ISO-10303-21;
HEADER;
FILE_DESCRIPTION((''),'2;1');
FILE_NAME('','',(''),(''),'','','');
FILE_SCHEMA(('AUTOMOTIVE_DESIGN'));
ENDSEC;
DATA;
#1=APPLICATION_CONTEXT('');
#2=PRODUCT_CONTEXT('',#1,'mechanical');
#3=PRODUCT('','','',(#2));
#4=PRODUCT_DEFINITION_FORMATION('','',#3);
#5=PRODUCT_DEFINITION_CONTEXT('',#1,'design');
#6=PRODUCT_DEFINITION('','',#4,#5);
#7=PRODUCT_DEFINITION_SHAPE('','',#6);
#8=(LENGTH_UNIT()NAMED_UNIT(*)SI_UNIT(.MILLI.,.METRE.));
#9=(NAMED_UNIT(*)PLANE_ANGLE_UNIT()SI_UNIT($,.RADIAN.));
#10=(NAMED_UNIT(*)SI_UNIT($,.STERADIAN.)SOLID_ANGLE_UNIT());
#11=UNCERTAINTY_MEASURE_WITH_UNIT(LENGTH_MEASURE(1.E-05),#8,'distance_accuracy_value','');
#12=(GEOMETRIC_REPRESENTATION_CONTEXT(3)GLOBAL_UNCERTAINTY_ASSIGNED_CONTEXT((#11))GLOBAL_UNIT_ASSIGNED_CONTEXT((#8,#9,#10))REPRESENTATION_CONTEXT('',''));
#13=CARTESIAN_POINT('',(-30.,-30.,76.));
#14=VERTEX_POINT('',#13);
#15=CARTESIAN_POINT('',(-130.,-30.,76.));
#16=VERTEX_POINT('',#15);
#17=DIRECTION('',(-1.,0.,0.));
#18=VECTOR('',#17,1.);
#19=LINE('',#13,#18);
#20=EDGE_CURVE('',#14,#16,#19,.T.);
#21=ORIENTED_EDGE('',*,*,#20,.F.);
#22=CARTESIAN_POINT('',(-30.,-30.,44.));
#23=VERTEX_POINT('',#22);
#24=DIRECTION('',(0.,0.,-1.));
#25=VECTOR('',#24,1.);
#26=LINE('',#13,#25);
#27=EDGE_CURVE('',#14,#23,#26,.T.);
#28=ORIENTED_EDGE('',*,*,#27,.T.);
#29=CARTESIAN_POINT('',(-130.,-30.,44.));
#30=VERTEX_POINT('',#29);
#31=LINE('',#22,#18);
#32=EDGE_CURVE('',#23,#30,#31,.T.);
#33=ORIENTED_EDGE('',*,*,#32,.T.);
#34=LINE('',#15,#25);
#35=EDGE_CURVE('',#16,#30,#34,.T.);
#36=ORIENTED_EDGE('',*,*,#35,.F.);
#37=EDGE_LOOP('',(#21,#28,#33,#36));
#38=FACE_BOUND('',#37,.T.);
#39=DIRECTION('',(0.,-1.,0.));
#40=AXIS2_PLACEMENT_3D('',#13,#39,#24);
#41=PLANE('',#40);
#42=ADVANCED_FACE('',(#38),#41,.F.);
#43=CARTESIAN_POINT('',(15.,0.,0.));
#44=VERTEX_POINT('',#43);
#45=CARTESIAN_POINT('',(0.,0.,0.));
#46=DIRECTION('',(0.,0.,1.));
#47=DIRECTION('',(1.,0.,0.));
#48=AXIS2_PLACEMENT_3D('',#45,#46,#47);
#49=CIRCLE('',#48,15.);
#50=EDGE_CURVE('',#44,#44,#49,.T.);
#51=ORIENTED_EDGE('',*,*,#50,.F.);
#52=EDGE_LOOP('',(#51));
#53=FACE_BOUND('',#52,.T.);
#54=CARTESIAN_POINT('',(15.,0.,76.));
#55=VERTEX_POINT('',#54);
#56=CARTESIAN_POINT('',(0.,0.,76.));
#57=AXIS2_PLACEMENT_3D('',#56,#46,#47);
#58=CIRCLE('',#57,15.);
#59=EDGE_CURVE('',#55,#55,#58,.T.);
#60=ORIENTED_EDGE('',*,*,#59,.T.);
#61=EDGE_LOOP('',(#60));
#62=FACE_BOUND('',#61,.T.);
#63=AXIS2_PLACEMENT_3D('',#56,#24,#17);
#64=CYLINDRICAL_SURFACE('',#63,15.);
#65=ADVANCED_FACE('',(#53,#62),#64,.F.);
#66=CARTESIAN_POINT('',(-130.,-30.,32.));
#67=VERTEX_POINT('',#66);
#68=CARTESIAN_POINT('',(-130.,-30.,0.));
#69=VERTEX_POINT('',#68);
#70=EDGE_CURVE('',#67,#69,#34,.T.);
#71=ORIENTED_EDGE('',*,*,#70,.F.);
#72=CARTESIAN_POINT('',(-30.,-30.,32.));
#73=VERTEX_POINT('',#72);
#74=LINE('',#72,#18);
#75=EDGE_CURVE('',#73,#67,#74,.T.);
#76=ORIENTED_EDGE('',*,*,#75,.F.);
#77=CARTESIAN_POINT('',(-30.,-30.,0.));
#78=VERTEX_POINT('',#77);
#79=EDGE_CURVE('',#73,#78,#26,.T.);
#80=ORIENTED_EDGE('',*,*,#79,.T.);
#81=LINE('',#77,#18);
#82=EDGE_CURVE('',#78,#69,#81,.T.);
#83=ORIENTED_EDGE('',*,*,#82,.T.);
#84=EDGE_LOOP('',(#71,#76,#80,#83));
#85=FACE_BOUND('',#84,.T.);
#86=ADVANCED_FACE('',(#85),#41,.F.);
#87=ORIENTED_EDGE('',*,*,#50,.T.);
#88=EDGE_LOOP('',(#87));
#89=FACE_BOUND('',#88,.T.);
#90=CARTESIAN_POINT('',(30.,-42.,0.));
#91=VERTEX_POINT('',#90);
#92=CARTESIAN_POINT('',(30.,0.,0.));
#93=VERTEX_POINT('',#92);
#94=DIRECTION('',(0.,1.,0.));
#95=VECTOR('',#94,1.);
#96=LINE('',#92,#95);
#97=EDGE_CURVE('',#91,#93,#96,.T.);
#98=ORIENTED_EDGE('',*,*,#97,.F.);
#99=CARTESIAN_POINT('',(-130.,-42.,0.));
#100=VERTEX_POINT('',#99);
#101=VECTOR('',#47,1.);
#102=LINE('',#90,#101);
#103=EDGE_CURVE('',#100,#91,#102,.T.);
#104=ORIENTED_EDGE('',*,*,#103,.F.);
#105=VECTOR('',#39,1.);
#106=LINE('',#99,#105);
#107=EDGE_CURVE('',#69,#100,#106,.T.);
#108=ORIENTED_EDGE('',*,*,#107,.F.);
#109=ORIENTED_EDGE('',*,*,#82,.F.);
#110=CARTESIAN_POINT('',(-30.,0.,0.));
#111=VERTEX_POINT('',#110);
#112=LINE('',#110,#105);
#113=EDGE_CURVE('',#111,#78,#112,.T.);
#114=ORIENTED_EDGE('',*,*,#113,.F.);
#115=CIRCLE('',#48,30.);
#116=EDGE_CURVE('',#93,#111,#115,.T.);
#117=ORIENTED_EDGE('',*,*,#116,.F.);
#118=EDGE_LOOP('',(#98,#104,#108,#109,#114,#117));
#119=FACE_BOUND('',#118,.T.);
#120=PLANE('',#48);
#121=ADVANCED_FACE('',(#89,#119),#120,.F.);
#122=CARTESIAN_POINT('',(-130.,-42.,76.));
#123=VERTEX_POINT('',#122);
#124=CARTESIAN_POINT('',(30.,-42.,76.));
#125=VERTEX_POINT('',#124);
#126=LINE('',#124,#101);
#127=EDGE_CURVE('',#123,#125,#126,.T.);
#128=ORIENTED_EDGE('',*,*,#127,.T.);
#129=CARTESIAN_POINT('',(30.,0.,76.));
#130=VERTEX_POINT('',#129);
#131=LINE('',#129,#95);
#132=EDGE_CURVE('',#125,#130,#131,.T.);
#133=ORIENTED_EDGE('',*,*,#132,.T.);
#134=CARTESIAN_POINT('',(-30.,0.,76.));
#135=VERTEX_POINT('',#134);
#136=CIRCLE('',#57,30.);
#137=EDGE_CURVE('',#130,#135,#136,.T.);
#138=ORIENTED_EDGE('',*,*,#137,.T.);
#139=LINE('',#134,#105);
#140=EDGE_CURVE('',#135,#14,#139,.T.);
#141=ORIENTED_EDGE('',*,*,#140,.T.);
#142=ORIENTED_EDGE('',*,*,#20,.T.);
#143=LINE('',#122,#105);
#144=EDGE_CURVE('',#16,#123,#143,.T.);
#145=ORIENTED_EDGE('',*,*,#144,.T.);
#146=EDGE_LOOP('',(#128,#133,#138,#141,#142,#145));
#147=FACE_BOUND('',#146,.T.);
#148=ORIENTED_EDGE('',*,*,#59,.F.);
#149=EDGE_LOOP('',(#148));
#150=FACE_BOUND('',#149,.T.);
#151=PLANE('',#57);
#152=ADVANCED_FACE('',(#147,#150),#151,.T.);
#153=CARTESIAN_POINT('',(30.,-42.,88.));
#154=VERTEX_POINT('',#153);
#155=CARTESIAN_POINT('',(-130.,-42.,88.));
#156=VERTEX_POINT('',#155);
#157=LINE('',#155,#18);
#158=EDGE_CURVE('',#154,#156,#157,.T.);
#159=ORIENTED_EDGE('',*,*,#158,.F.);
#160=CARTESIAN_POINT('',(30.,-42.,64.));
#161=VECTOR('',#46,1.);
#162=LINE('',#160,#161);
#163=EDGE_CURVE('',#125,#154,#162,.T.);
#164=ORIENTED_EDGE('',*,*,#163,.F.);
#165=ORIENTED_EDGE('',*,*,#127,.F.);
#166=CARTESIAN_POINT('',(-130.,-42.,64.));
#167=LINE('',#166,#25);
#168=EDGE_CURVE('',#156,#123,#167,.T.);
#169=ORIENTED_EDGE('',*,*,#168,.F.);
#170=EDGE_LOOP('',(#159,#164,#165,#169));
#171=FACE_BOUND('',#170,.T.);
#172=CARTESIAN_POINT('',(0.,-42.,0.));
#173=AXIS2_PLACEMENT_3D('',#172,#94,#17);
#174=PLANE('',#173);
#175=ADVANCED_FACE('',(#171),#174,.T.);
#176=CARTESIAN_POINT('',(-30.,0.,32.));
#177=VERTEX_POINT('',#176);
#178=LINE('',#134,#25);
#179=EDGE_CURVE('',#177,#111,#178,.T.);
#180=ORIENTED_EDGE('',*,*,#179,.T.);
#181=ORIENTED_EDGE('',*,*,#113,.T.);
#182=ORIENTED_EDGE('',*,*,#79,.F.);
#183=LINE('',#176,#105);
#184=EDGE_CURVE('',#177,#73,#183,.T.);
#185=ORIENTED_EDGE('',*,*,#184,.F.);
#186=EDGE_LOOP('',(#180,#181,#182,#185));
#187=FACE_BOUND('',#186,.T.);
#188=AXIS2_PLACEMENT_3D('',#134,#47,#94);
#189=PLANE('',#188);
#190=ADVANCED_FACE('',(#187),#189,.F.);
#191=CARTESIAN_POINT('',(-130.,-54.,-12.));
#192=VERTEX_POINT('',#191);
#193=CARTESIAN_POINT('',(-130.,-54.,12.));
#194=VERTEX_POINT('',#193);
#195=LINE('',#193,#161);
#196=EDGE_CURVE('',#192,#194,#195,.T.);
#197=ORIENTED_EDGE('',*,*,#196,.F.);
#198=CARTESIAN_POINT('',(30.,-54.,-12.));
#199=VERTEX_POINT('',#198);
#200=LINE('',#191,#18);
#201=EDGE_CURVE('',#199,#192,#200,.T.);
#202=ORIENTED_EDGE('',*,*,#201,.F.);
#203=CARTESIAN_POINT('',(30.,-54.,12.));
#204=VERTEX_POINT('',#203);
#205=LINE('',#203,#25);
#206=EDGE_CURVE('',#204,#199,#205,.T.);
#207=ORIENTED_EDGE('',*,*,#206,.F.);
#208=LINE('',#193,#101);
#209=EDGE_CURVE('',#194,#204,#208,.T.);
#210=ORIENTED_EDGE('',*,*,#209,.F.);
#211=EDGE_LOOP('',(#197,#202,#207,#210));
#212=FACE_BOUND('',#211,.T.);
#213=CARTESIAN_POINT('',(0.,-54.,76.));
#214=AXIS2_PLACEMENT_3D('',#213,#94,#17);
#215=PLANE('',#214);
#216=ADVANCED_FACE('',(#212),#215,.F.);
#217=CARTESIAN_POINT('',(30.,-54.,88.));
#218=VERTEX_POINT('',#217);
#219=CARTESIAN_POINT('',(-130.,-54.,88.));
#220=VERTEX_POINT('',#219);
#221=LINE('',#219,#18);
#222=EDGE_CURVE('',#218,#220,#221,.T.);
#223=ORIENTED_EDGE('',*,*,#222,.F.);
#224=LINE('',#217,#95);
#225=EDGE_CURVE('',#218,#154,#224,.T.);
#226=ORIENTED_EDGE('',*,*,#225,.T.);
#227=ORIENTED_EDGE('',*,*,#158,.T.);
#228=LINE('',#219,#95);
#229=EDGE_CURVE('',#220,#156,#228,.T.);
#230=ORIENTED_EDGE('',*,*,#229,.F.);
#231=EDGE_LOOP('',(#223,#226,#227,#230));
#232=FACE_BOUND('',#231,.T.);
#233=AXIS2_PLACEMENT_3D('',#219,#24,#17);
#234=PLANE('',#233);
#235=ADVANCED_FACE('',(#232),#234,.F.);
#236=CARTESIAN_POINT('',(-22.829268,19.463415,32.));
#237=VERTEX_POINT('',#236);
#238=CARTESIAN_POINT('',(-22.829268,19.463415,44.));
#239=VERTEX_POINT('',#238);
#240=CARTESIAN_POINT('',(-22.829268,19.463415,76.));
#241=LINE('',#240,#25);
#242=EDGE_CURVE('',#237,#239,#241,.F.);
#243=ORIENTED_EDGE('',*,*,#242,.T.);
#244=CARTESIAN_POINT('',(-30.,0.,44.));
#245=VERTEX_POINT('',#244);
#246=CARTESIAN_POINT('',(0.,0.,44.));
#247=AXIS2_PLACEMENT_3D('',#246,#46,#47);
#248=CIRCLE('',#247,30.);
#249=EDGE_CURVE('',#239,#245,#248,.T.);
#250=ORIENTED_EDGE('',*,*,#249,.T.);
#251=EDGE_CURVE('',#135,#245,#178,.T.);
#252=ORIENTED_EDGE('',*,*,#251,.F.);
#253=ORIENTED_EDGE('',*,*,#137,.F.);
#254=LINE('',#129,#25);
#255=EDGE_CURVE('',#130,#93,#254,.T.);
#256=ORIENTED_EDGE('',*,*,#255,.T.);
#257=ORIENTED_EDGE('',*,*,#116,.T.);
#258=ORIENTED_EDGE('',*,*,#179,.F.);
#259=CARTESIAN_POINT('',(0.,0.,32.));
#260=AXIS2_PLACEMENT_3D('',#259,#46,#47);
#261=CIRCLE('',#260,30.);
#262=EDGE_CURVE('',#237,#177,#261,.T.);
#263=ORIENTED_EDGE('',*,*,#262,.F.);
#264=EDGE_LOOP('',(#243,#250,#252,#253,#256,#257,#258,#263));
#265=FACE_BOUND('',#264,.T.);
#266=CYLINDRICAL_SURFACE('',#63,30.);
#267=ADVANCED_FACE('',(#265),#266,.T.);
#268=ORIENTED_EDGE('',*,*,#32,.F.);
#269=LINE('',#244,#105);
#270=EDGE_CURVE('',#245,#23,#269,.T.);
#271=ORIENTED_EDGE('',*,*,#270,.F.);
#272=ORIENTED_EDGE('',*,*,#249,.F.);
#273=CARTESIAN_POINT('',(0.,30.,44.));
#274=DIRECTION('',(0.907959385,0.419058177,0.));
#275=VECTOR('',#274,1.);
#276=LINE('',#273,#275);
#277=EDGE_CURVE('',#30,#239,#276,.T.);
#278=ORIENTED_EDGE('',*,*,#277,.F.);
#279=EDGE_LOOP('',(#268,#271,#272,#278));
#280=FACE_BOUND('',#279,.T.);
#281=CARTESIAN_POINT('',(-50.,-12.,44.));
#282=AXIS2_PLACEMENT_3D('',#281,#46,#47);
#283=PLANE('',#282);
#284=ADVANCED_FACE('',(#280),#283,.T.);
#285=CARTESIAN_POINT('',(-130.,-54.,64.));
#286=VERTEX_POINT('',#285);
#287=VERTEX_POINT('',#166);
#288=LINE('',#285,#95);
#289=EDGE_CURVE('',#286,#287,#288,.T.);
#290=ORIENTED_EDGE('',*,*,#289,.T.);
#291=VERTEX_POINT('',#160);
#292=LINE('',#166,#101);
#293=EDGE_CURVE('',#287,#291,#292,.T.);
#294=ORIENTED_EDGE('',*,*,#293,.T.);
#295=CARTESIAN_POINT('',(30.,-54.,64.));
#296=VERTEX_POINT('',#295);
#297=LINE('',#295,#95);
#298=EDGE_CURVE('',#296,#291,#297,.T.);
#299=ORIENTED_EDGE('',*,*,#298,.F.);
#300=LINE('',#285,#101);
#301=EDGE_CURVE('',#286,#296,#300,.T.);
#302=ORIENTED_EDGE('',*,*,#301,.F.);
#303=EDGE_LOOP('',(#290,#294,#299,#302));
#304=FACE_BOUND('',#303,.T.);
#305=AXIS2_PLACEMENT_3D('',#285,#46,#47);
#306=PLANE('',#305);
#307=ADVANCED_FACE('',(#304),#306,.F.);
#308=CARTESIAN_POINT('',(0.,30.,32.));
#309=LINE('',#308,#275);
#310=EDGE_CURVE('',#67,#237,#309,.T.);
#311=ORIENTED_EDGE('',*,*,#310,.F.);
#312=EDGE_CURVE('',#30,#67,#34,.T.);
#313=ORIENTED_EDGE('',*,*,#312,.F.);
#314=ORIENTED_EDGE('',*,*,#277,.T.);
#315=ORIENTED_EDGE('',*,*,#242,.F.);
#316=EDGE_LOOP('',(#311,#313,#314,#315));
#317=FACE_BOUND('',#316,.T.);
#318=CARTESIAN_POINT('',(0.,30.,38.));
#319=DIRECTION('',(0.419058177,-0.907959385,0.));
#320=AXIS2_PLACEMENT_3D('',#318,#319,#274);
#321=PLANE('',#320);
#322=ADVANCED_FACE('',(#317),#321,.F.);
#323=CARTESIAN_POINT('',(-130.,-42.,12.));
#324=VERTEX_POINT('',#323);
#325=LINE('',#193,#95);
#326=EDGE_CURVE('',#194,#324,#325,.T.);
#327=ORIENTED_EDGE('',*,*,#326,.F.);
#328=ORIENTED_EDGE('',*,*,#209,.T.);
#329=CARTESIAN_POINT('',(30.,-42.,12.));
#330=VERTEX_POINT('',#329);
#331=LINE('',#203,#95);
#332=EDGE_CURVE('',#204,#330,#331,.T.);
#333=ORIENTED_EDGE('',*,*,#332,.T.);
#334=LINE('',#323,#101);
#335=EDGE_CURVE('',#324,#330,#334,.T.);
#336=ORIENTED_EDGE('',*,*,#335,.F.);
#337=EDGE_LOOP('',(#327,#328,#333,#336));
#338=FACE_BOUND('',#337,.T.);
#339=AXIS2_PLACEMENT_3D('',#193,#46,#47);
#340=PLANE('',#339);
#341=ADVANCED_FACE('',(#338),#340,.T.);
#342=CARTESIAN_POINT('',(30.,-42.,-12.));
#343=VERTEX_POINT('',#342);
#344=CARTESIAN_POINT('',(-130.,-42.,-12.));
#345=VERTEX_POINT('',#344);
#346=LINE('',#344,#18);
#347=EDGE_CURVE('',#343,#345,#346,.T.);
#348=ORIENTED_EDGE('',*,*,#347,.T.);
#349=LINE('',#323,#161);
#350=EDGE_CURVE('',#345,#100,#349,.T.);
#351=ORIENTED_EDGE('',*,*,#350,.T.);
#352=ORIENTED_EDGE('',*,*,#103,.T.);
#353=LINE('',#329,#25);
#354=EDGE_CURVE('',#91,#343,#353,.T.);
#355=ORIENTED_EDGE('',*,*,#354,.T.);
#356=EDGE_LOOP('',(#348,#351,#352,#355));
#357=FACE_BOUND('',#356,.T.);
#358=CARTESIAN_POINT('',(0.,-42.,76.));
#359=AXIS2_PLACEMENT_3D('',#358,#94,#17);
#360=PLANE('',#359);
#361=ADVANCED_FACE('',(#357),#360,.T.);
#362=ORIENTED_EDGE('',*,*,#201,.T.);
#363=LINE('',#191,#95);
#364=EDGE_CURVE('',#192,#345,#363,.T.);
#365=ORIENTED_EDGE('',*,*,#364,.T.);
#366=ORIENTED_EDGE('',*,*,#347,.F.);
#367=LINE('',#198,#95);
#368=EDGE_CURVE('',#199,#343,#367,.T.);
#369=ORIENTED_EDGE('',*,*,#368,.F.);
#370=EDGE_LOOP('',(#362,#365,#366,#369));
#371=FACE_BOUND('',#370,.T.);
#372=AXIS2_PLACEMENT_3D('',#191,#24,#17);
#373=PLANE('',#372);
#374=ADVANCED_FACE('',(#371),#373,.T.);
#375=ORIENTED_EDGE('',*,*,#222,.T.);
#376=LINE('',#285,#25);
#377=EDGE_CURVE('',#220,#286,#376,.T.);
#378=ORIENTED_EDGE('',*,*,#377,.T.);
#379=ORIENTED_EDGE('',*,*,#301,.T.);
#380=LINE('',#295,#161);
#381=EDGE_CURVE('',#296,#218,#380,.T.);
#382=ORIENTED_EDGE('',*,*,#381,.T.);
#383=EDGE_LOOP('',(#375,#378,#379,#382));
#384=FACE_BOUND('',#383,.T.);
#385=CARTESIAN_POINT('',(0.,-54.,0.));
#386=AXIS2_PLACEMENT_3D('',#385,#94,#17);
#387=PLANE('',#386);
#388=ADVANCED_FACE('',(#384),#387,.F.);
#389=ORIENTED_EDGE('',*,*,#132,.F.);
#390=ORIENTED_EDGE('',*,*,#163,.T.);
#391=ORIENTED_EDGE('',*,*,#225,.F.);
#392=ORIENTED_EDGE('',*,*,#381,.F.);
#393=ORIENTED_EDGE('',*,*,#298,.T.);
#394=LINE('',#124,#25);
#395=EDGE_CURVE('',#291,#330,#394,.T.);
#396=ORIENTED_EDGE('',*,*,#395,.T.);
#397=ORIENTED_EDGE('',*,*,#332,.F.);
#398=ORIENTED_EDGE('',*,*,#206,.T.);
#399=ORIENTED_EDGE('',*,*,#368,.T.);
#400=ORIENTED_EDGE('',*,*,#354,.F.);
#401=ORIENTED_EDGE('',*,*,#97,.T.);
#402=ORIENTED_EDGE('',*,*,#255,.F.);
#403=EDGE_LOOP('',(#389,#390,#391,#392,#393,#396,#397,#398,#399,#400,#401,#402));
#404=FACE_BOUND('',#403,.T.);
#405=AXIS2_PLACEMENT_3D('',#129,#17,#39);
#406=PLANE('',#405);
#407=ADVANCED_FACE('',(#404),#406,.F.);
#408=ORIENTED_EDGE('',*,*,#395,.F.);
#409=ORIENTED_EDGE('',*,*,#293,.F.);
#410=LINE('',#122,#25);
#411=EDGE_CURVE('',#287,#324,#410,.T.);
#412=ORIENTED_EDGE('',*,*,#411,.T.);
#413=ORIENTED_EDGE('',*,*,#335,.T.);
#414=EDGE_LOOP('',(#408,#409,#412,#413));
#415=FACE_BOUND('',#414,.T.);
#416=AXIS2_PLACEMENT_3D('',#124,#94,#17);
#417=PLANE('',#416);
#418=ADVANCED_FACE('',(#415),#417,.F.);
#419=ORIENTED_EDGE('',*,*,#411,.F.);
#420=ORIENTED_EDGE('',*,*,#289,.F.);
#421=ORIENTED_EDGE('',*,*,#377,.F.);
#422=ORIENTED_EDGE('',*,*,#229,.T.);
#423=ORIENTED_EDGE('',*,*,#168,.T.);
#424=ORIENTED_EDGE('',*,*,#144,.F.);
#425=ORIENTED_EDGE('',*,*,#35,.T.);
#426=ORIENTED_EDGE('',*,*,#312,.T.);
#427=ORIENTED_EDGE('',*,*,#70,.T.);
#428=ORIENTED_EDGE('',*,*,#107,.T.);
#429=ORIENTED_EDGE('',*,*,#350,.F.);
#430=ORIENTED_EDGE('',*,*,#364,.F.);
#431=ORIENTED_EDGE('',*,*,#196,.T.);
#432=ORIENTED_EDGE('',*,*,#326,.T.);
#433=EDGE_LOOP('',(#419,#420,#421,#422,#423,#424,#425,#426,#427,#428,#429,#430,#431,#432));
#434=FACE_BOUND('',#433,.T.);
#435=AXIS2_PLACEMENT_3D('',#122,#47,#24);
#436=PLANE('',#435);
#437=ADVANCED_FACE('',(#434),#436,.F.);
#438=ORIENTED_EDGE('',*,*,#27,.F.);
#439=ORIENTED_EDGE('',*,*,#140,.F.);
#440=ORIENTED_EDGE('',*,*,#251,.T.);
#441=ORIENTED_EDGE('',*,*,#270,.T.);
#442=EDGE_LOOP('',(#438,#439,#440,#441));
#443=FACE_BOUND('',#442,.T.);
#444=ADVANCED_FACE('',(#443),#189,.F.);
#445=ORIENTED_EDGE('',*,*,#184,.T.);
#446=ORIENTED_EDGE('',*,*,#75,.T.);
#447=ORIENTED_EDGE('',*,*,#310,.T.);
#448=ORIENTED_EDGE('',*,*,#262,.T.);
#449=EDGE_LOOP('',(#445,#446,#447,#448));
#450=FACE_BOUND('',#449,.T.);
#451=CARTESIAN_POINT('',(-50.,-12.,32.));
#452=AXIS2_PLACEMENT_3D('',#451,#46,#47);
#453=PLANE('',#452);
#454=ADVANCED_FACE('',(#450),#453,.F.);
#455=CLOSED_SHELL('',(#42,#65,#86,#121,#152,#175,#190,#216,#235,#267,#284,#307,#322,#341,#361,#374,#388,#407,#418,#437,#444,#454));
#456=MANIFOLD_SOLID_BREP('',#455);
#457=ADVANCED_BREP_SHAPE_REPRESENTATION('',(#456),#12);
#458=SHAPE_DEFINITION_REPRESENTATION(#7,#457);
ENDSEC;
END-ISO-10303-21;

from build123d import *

# Parameters (mm, degrees)
SKETCH1_R           = 15
BOSS_EXTRUDE1_DEPTH = 76
SKETCH2_W           = 160
SKETCH2_H           = 24
BOSS_EXTRUDE2_DEPTH = 12
RIB1_START          = -6
RIB1_DEPTH          = 12


# Read off the part's stored shape, not the designer's step: Rib1
with BuildPart() as part:
    # Sketch1 → Boss-Extrude1 (new body)
    with BuildSketch(Plane.XY):
        with BuildLine():
            Line((-30, 0), (-30, -30))
            Line((-30, -30), (-130, -30))
            Line((-130, -30), (-130, -42))
            Line((-130, -42), (30, -42))
            Line((30, -42), (30, 0))
            ThreePointArc((30, 0), (0, 30), (-30, 0))
        make_face()
        Circle(SKETCH1_R, mode=Mode.SUBTRACT)
    extrude(amount=BOSS_EXTRUDE1_DEPTH)

    # Sketch2 → Boss-Extrude2 (add)
    with BuildSketch(Plane.XZ.offset(42)):
        with Locations((-50, 76)):
            Rectangle(SKETCH2_W, SKETCH2_H)
    boss_extrude2 = extrude(amount=BOSS_EXTRUDE2_DEPTH)

    # Mirror1: Boss-Extrude2 across plane
    add(boss_extrude2.mirror(Plane.XY.offset(38)))

    # Rib1 outline → Rib1 (add)
    with BuildSketch(Plane.XY.offset(38).offset(RIB1_START)):
        with BuildLine():
            Line((-22.829268293, 19.463414634), (-130, -30))
            Line((-130, -30), (-30, -30))
            Line((-30, -30), (-30, 0))
            ThreePointArc((-30, 0), (-28.150293505, 10.371160765), (-22.829268293, 19.463414634))
        make_face()
    extrude(amount=RIB1_DEPTH)


solid = part.part
